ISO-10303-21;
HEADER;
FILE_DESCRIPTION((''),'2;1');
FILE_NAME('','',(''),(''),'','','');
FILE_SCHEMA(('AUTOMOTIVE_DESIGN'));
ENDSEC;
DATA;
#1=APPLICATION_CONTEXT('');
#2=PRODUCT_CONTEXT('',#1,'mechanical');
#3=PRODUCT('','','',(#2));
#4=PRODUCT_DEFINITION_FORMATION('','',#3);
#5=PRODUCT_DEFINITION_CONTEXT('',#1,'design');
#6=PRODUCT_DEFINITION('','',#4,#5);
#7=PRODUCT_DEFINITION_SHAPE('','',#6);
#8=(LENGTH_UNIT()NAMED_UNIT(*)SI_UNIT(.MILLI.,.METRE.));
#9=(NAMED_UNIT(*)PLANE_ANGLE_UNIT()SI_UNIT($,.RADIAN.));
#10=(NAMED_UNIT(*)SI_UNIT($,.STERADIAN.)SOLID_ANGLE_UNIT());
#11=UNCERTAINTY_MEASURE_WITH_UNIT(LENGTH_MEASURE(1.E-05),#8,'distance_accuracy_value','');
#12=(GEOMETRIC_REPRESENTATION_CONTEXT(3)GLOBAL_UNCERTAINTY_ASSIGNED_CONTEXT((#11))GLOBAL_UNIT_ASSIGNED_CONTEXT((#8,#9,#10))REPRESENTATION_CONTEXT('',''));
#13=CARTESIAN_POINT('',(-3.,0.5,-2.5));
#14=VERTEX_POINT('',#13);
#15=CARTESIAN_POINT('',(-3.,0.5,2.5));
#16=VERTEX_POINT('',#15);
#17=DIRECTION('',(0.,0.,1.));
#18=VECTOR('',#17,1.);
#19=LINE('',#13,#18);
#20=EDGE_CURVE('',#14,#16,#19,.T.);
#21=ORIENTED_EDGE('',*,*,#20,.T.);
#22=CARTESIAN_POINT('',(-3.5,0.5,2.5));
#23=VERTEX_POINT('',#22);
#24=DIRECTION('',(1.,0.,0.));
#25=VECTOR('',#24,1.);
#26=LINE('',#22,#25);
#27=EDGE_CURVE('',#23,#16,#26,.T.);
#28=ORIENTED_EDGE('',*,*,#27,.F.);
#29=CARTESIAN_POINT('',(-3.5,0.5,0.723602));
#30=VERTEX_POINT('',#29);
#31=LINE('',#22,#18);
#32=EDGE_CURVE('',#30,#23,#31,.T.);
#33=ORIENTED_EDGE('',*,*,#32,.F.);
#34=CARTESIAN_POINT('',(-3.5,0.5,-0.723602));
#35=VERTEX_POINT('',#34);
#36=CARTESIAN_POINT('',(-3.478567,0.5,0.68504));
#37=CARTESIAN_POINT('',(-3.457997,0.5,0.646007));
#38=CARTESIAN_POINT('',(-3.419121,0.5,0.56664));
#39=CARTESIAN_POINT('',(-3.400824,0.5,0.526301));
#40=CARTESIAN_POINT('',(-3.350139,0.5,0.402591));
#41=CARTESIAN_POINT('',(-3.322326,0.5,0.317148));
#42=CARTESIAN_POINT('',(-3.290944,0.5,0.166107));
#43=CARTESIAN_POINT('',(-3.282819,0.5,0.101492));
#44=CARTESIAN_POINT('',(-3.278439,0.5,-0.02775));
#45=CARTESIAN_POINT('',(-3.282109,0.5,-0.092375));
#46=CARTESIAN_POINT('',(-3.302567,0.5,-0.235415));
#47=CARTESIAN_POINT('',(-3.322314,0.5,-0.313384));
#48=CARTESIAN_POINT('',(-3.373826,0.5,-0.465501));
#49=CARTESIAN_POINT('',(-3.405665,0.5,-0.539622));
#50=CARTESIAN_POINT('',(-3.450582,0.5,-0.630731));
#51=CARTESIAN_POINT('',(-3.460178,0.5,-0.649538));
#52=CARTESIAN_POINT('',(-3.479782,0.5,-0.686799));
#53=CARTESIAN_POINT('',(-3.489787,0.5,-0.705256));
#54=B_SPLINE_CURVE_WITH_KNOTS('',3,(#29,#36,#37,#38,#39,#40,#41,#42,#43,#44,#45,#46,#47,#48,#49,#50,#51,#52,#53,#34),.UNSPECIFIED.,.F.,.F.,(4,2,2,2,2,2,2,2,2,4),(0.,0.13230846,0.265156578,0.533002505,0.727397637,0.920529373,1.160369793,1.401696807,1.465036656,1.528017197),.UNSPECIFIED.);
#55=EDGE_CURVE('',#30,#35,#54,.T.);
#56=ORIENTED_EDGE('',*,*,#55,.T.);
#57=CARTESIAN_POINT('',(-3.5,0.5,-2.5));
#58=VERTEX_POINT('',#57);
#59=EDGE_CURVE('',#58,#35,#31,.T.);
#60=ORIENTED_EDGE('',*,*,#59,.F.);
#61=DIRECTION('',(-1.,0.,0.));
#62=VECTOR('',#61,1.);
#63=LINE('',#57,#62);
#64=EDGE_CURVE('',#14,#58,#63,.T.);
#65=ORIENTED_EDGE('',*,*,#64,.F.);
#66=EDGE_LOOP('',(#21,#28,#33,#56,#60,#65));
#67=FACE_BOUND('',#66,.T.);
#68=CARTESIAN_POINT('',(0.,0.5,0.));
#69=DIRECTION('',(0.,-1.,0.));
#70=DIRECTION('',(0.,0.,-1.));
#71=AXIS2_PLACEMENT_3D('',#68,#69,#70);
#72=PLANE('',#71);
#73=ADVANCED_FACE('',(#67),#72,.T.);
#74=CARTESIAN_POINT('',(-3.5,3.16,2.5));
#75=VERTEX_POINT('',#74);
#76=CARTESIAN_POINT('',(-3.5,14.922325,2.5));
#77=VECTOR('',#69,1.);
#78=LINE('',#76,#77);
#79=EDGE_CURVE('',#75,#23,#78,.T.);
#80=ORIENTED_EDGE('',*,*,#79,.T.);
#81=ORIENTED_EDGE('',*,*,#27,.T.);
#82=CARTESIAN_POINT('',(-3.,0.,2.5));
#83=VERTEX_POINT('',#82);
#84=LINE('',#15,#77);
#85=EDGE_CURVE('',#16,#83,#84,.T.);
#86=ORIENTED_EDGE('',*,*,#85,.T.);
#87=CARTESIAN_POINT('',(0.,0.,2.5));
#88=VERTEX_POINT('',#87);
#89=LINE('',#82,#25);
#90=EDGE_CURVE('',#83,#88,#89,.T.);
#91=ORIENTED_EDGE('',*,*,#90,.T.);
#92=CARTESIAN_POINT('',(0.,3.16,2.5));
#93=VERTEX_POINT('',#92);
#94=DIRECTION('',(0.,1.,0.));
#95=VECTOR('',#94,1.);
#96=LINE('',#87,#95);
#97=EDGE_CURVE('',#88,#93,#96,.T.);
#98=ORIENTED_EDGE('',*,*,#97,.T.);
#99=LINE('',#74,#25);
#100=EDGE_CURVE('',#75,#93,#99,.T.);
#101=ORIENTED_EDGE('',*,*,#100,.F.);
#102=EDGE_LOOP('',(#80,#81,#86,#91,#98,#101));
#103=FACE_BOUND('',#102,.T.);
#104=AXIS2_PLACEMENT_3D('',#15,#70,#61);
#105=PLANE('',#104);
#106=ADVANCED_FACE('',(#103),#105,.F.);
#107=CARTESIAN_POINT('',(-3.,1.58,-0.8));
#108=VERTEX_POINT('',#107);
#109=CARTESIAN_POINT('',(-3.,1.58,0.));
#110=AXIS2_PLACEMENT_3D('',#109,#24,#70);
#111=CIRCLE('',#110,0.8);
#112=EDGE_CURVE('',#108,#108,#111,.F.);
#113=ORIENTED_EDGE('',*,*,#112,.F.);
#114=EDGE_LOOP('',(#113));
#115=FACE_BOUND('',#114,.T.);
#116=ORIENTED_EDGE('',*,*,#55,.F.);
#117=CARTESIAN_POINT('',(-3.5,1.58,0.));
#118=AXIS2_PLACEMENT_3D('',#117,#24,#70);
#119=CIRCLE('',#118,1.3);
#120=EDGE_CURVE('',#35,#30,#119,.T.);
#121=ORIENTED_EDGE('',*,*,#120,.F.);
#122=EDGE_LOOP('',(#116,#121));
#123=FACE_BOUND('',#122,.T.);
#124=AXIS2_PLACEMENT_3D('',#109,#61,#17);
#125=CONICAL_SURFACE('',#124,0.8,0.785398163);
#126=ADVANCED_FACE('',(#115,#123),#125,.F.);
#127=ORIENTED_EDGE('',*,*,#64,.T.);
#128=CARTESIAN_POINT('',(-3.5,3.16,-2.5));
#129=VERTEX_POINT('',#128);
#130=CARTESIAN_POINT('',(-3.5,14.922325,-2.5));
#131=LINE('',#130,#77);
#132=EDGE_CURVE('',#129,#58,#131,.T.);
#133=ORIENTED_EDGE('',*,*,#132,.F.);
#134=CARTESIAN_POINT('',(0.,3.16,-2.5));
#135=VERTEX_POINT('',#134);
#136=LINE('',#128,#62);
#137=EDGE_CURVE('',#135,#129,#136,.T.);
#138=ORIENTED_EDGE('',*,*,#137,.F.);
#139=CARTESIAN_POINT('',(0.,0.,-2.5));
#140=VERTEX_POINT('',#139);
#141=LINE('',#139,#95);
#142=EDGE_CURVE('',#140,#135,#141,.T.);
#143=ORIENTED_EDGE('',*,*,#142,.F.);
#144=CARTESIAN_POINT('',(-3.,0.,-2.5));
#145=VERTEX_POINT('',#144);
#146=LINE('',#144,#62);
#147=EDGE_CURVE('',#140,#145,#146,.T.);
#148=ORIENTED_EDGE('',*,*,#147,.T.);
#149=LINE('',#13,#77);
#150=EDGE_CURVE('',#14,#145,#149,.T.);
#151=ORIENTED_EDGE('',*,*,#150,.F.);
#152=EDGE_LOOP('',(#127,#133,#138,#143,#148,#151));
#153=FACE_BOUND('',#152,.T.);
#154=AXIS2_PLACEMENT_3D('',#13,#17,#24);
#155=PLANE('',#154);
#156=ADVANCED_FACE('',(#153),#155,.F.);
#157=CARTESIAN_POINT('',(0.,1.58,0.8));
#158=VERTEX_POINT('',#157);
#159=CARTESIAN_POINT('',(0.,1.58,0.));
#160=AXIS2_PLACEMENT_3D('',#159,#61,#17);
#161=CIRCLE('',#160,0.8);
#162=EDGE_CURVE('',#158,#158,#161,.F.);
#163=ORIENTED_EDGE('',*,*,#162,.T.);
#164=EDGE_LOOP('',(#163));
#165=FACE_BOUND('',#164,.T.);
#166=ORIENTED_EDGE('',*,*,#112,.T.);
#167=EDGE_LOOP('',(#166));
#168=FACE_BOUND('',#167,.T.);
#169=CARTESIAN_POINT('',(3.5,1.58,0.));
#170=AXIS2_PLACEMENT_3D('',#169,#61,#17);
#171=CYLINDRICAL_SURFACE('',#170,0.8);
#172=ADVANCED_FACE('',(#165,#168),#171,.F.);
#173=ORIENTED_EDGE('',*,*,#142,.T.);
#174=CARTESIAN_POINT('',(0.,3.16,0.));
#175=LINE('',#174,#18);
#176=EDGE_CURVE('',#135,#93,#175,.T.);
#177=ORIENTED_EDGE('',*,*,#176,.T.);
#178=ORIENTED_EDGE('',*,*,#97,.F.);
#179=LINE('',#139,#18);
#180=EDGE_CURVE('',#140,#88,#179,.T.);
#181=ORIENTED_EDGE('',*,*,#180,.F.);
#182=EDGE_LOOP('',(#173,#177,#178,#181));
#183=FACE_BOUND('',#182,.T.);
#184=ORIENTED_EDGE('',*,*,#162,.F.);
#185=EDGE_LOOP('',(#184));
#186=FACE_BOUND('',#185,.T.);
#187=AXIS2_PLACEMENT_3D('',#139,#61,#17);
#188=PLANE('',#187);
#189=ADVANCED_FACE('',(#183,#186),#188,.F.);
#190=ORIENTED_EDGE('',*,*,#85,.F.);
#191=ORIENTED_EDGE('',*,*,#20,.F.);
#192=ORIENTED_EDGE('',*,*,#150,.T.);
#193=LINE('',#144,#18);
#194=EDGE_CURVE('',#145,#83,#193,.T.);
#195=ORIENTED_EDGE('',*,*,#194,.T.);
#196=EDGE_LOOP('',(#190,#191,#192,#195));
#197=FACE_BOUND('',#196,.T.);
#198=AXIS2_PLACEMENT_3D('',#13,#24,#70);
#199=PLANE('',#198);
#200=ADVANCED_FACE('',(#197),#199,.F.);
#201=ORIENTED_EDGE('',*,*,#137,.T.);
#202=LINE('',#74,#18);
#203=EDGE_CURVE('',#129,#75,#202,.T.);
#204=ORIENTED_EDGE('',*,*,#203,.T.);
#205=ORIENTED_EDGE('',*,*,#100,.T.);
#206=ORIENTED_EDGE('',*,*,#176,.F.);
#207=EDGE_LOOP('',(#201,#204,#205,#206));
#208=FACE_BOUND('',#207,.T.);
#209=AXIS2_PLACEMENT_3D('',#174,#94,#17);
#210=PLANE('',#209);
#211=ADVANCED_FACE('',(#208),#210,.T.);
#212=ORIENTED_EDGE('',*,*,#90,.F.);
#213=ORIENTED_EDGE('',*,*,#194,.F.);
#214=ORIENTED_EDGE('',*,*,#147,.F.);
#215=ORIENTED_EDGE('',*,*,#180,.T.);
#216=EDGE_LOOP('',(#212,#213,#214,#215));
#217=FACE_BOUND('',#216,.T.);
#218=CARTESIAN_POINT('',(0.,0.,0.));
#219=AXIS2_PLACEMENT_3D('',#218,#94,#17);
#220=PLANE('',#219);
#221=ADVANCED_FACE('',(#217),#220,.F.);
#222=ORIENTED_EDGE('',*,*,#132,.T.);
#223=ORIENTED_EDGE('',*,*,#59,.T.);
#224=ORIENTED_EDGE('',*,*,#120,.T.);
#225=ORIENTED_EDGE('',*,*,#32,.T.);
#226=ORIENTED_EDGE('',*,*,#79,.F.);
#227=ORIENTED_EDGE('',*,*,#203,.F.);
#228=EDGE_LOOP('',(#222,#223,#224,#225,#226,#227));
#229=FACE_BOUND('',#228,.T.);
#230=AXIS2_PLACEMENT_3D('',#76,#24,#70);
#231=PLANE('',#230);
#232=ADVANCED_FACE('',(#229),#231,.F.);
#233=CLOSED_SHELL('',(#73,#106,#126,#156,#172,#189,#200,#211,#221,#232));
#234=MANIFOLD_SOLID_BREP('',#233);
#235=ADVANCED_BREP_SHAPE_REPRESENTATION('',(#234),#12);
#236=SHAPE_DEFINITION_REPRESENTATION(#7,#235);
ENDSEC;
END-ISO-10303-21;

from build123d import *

# Parameters (mm, degrees)
SKETCH1_W               = 6
SKETCH1_H               = 5
BOSS_EXTRUDE1_DEPTH     = 0.5
SKETCH2_W               = 7
SKETCH2_H               = 5
BOSS_EXTRUDE2_DEPTH     = 2.66
SKETCH3_R               = 0.8
CUT_EXTRUDE1_DEPTH      = 9.076855824
CHAMFER1_SIZE           = 0.5
CUT_EXTRUDE2_DEPTH      = 6.337190272
CUT_EXTRUDE2_DEPTH_BACK = 6.337190272
SKETCH4_W               = 3.5
SKETCH4_H               = 5


with BuildPart() as part:
    # Sketch1 → Boss-Extrude1 (new body)
    with BuildSketch(Plane(origin=(0, 0, 0), x_dir=(1, 0, 0), z_dir=(0, 1, 0))):
        Rectangle(SKETCH1_W, SKETCH1_H)
    extrude(amount=BOSS_EXTRUDE1_DEPTH)

    # Sketch2 → Boss-Extrude2 (add)
    with BuildSketch(Plane(origin=(0, 0.5, 0), x_dir=(1, 0, 0), z_dir=(0, 1, 0))):
        Rectangle(SKETCH2_W, SKETCH2_H)
    extrude(amount=BOSS_EXTRUDE2_DEPTH)

    # Sketch3 → Cut-Extrude1 (cut, through all)
    with BuildSketch(Plane.ZY.offset(3.5)):
        with Locations((0, 1.58)):
            Circle(SKETCH3_R)
    extrude(amount=-CUT_EXTRUDE1_DEPTH, mode=Mode.SUBTRACT)

    # Chamfer1
    # the kernel refuses this chamfer: 0.5 mm, written as the material it takes off along each edge
    with BuildSketch(Plane(origin=(3.5, 1.58, 0), x_dir=(0, 0, 1), z_dir=(0, -1, 0))) as chamfer1_piece_1:
        Polygon((0.8 + CHAMFER1_SIZE, 0), (0.8, CHAMFER1_SIZE), (0.8, 0), align=None)
    revolve(axis=Axis((3.5, 1.58, 0), (-1, 0, 0)), mode=Mode.SUBTRACT)
    with BuildSketch(Plane(origin=(-3.5, 1.58, 0), x_dir=(0, 0, 1), z_dir=(0, -1, 0))) as chamfer1_piece_2:
        Polygon((0.8 + CHAMFER1_SIZE, 0), (0.8, -CHAMFER1_SIZE), (0.8, 0), align=None)
    revolve(axis=Axis((-3.5, 1.58, 0), (-1, 0, 0)), mode=Mode.SUBTRACT)

    # Sketch4 → Cut-Extrude2 (cut, two sides: drawn at the far end of the back side and taken through both)
    with BuildSketch(Plane(origin=(0, 3.16, 0), x_dir=(1, 0, 0), z_dir=(0, 1, 0)).offset(-CUT_EXTRUDE2_DEPTH_BACK)):
        with Locations((1.75, 0)):
            Rectangle(SKETCH4_W, SKETCH4_H)
    extrude(amount=CUT_EXTRUDE2_DEPTH + CUT_EXTRUDE2_DEPTH_BACK, mode=Mode.SUBTRACT)


solid = part.part
